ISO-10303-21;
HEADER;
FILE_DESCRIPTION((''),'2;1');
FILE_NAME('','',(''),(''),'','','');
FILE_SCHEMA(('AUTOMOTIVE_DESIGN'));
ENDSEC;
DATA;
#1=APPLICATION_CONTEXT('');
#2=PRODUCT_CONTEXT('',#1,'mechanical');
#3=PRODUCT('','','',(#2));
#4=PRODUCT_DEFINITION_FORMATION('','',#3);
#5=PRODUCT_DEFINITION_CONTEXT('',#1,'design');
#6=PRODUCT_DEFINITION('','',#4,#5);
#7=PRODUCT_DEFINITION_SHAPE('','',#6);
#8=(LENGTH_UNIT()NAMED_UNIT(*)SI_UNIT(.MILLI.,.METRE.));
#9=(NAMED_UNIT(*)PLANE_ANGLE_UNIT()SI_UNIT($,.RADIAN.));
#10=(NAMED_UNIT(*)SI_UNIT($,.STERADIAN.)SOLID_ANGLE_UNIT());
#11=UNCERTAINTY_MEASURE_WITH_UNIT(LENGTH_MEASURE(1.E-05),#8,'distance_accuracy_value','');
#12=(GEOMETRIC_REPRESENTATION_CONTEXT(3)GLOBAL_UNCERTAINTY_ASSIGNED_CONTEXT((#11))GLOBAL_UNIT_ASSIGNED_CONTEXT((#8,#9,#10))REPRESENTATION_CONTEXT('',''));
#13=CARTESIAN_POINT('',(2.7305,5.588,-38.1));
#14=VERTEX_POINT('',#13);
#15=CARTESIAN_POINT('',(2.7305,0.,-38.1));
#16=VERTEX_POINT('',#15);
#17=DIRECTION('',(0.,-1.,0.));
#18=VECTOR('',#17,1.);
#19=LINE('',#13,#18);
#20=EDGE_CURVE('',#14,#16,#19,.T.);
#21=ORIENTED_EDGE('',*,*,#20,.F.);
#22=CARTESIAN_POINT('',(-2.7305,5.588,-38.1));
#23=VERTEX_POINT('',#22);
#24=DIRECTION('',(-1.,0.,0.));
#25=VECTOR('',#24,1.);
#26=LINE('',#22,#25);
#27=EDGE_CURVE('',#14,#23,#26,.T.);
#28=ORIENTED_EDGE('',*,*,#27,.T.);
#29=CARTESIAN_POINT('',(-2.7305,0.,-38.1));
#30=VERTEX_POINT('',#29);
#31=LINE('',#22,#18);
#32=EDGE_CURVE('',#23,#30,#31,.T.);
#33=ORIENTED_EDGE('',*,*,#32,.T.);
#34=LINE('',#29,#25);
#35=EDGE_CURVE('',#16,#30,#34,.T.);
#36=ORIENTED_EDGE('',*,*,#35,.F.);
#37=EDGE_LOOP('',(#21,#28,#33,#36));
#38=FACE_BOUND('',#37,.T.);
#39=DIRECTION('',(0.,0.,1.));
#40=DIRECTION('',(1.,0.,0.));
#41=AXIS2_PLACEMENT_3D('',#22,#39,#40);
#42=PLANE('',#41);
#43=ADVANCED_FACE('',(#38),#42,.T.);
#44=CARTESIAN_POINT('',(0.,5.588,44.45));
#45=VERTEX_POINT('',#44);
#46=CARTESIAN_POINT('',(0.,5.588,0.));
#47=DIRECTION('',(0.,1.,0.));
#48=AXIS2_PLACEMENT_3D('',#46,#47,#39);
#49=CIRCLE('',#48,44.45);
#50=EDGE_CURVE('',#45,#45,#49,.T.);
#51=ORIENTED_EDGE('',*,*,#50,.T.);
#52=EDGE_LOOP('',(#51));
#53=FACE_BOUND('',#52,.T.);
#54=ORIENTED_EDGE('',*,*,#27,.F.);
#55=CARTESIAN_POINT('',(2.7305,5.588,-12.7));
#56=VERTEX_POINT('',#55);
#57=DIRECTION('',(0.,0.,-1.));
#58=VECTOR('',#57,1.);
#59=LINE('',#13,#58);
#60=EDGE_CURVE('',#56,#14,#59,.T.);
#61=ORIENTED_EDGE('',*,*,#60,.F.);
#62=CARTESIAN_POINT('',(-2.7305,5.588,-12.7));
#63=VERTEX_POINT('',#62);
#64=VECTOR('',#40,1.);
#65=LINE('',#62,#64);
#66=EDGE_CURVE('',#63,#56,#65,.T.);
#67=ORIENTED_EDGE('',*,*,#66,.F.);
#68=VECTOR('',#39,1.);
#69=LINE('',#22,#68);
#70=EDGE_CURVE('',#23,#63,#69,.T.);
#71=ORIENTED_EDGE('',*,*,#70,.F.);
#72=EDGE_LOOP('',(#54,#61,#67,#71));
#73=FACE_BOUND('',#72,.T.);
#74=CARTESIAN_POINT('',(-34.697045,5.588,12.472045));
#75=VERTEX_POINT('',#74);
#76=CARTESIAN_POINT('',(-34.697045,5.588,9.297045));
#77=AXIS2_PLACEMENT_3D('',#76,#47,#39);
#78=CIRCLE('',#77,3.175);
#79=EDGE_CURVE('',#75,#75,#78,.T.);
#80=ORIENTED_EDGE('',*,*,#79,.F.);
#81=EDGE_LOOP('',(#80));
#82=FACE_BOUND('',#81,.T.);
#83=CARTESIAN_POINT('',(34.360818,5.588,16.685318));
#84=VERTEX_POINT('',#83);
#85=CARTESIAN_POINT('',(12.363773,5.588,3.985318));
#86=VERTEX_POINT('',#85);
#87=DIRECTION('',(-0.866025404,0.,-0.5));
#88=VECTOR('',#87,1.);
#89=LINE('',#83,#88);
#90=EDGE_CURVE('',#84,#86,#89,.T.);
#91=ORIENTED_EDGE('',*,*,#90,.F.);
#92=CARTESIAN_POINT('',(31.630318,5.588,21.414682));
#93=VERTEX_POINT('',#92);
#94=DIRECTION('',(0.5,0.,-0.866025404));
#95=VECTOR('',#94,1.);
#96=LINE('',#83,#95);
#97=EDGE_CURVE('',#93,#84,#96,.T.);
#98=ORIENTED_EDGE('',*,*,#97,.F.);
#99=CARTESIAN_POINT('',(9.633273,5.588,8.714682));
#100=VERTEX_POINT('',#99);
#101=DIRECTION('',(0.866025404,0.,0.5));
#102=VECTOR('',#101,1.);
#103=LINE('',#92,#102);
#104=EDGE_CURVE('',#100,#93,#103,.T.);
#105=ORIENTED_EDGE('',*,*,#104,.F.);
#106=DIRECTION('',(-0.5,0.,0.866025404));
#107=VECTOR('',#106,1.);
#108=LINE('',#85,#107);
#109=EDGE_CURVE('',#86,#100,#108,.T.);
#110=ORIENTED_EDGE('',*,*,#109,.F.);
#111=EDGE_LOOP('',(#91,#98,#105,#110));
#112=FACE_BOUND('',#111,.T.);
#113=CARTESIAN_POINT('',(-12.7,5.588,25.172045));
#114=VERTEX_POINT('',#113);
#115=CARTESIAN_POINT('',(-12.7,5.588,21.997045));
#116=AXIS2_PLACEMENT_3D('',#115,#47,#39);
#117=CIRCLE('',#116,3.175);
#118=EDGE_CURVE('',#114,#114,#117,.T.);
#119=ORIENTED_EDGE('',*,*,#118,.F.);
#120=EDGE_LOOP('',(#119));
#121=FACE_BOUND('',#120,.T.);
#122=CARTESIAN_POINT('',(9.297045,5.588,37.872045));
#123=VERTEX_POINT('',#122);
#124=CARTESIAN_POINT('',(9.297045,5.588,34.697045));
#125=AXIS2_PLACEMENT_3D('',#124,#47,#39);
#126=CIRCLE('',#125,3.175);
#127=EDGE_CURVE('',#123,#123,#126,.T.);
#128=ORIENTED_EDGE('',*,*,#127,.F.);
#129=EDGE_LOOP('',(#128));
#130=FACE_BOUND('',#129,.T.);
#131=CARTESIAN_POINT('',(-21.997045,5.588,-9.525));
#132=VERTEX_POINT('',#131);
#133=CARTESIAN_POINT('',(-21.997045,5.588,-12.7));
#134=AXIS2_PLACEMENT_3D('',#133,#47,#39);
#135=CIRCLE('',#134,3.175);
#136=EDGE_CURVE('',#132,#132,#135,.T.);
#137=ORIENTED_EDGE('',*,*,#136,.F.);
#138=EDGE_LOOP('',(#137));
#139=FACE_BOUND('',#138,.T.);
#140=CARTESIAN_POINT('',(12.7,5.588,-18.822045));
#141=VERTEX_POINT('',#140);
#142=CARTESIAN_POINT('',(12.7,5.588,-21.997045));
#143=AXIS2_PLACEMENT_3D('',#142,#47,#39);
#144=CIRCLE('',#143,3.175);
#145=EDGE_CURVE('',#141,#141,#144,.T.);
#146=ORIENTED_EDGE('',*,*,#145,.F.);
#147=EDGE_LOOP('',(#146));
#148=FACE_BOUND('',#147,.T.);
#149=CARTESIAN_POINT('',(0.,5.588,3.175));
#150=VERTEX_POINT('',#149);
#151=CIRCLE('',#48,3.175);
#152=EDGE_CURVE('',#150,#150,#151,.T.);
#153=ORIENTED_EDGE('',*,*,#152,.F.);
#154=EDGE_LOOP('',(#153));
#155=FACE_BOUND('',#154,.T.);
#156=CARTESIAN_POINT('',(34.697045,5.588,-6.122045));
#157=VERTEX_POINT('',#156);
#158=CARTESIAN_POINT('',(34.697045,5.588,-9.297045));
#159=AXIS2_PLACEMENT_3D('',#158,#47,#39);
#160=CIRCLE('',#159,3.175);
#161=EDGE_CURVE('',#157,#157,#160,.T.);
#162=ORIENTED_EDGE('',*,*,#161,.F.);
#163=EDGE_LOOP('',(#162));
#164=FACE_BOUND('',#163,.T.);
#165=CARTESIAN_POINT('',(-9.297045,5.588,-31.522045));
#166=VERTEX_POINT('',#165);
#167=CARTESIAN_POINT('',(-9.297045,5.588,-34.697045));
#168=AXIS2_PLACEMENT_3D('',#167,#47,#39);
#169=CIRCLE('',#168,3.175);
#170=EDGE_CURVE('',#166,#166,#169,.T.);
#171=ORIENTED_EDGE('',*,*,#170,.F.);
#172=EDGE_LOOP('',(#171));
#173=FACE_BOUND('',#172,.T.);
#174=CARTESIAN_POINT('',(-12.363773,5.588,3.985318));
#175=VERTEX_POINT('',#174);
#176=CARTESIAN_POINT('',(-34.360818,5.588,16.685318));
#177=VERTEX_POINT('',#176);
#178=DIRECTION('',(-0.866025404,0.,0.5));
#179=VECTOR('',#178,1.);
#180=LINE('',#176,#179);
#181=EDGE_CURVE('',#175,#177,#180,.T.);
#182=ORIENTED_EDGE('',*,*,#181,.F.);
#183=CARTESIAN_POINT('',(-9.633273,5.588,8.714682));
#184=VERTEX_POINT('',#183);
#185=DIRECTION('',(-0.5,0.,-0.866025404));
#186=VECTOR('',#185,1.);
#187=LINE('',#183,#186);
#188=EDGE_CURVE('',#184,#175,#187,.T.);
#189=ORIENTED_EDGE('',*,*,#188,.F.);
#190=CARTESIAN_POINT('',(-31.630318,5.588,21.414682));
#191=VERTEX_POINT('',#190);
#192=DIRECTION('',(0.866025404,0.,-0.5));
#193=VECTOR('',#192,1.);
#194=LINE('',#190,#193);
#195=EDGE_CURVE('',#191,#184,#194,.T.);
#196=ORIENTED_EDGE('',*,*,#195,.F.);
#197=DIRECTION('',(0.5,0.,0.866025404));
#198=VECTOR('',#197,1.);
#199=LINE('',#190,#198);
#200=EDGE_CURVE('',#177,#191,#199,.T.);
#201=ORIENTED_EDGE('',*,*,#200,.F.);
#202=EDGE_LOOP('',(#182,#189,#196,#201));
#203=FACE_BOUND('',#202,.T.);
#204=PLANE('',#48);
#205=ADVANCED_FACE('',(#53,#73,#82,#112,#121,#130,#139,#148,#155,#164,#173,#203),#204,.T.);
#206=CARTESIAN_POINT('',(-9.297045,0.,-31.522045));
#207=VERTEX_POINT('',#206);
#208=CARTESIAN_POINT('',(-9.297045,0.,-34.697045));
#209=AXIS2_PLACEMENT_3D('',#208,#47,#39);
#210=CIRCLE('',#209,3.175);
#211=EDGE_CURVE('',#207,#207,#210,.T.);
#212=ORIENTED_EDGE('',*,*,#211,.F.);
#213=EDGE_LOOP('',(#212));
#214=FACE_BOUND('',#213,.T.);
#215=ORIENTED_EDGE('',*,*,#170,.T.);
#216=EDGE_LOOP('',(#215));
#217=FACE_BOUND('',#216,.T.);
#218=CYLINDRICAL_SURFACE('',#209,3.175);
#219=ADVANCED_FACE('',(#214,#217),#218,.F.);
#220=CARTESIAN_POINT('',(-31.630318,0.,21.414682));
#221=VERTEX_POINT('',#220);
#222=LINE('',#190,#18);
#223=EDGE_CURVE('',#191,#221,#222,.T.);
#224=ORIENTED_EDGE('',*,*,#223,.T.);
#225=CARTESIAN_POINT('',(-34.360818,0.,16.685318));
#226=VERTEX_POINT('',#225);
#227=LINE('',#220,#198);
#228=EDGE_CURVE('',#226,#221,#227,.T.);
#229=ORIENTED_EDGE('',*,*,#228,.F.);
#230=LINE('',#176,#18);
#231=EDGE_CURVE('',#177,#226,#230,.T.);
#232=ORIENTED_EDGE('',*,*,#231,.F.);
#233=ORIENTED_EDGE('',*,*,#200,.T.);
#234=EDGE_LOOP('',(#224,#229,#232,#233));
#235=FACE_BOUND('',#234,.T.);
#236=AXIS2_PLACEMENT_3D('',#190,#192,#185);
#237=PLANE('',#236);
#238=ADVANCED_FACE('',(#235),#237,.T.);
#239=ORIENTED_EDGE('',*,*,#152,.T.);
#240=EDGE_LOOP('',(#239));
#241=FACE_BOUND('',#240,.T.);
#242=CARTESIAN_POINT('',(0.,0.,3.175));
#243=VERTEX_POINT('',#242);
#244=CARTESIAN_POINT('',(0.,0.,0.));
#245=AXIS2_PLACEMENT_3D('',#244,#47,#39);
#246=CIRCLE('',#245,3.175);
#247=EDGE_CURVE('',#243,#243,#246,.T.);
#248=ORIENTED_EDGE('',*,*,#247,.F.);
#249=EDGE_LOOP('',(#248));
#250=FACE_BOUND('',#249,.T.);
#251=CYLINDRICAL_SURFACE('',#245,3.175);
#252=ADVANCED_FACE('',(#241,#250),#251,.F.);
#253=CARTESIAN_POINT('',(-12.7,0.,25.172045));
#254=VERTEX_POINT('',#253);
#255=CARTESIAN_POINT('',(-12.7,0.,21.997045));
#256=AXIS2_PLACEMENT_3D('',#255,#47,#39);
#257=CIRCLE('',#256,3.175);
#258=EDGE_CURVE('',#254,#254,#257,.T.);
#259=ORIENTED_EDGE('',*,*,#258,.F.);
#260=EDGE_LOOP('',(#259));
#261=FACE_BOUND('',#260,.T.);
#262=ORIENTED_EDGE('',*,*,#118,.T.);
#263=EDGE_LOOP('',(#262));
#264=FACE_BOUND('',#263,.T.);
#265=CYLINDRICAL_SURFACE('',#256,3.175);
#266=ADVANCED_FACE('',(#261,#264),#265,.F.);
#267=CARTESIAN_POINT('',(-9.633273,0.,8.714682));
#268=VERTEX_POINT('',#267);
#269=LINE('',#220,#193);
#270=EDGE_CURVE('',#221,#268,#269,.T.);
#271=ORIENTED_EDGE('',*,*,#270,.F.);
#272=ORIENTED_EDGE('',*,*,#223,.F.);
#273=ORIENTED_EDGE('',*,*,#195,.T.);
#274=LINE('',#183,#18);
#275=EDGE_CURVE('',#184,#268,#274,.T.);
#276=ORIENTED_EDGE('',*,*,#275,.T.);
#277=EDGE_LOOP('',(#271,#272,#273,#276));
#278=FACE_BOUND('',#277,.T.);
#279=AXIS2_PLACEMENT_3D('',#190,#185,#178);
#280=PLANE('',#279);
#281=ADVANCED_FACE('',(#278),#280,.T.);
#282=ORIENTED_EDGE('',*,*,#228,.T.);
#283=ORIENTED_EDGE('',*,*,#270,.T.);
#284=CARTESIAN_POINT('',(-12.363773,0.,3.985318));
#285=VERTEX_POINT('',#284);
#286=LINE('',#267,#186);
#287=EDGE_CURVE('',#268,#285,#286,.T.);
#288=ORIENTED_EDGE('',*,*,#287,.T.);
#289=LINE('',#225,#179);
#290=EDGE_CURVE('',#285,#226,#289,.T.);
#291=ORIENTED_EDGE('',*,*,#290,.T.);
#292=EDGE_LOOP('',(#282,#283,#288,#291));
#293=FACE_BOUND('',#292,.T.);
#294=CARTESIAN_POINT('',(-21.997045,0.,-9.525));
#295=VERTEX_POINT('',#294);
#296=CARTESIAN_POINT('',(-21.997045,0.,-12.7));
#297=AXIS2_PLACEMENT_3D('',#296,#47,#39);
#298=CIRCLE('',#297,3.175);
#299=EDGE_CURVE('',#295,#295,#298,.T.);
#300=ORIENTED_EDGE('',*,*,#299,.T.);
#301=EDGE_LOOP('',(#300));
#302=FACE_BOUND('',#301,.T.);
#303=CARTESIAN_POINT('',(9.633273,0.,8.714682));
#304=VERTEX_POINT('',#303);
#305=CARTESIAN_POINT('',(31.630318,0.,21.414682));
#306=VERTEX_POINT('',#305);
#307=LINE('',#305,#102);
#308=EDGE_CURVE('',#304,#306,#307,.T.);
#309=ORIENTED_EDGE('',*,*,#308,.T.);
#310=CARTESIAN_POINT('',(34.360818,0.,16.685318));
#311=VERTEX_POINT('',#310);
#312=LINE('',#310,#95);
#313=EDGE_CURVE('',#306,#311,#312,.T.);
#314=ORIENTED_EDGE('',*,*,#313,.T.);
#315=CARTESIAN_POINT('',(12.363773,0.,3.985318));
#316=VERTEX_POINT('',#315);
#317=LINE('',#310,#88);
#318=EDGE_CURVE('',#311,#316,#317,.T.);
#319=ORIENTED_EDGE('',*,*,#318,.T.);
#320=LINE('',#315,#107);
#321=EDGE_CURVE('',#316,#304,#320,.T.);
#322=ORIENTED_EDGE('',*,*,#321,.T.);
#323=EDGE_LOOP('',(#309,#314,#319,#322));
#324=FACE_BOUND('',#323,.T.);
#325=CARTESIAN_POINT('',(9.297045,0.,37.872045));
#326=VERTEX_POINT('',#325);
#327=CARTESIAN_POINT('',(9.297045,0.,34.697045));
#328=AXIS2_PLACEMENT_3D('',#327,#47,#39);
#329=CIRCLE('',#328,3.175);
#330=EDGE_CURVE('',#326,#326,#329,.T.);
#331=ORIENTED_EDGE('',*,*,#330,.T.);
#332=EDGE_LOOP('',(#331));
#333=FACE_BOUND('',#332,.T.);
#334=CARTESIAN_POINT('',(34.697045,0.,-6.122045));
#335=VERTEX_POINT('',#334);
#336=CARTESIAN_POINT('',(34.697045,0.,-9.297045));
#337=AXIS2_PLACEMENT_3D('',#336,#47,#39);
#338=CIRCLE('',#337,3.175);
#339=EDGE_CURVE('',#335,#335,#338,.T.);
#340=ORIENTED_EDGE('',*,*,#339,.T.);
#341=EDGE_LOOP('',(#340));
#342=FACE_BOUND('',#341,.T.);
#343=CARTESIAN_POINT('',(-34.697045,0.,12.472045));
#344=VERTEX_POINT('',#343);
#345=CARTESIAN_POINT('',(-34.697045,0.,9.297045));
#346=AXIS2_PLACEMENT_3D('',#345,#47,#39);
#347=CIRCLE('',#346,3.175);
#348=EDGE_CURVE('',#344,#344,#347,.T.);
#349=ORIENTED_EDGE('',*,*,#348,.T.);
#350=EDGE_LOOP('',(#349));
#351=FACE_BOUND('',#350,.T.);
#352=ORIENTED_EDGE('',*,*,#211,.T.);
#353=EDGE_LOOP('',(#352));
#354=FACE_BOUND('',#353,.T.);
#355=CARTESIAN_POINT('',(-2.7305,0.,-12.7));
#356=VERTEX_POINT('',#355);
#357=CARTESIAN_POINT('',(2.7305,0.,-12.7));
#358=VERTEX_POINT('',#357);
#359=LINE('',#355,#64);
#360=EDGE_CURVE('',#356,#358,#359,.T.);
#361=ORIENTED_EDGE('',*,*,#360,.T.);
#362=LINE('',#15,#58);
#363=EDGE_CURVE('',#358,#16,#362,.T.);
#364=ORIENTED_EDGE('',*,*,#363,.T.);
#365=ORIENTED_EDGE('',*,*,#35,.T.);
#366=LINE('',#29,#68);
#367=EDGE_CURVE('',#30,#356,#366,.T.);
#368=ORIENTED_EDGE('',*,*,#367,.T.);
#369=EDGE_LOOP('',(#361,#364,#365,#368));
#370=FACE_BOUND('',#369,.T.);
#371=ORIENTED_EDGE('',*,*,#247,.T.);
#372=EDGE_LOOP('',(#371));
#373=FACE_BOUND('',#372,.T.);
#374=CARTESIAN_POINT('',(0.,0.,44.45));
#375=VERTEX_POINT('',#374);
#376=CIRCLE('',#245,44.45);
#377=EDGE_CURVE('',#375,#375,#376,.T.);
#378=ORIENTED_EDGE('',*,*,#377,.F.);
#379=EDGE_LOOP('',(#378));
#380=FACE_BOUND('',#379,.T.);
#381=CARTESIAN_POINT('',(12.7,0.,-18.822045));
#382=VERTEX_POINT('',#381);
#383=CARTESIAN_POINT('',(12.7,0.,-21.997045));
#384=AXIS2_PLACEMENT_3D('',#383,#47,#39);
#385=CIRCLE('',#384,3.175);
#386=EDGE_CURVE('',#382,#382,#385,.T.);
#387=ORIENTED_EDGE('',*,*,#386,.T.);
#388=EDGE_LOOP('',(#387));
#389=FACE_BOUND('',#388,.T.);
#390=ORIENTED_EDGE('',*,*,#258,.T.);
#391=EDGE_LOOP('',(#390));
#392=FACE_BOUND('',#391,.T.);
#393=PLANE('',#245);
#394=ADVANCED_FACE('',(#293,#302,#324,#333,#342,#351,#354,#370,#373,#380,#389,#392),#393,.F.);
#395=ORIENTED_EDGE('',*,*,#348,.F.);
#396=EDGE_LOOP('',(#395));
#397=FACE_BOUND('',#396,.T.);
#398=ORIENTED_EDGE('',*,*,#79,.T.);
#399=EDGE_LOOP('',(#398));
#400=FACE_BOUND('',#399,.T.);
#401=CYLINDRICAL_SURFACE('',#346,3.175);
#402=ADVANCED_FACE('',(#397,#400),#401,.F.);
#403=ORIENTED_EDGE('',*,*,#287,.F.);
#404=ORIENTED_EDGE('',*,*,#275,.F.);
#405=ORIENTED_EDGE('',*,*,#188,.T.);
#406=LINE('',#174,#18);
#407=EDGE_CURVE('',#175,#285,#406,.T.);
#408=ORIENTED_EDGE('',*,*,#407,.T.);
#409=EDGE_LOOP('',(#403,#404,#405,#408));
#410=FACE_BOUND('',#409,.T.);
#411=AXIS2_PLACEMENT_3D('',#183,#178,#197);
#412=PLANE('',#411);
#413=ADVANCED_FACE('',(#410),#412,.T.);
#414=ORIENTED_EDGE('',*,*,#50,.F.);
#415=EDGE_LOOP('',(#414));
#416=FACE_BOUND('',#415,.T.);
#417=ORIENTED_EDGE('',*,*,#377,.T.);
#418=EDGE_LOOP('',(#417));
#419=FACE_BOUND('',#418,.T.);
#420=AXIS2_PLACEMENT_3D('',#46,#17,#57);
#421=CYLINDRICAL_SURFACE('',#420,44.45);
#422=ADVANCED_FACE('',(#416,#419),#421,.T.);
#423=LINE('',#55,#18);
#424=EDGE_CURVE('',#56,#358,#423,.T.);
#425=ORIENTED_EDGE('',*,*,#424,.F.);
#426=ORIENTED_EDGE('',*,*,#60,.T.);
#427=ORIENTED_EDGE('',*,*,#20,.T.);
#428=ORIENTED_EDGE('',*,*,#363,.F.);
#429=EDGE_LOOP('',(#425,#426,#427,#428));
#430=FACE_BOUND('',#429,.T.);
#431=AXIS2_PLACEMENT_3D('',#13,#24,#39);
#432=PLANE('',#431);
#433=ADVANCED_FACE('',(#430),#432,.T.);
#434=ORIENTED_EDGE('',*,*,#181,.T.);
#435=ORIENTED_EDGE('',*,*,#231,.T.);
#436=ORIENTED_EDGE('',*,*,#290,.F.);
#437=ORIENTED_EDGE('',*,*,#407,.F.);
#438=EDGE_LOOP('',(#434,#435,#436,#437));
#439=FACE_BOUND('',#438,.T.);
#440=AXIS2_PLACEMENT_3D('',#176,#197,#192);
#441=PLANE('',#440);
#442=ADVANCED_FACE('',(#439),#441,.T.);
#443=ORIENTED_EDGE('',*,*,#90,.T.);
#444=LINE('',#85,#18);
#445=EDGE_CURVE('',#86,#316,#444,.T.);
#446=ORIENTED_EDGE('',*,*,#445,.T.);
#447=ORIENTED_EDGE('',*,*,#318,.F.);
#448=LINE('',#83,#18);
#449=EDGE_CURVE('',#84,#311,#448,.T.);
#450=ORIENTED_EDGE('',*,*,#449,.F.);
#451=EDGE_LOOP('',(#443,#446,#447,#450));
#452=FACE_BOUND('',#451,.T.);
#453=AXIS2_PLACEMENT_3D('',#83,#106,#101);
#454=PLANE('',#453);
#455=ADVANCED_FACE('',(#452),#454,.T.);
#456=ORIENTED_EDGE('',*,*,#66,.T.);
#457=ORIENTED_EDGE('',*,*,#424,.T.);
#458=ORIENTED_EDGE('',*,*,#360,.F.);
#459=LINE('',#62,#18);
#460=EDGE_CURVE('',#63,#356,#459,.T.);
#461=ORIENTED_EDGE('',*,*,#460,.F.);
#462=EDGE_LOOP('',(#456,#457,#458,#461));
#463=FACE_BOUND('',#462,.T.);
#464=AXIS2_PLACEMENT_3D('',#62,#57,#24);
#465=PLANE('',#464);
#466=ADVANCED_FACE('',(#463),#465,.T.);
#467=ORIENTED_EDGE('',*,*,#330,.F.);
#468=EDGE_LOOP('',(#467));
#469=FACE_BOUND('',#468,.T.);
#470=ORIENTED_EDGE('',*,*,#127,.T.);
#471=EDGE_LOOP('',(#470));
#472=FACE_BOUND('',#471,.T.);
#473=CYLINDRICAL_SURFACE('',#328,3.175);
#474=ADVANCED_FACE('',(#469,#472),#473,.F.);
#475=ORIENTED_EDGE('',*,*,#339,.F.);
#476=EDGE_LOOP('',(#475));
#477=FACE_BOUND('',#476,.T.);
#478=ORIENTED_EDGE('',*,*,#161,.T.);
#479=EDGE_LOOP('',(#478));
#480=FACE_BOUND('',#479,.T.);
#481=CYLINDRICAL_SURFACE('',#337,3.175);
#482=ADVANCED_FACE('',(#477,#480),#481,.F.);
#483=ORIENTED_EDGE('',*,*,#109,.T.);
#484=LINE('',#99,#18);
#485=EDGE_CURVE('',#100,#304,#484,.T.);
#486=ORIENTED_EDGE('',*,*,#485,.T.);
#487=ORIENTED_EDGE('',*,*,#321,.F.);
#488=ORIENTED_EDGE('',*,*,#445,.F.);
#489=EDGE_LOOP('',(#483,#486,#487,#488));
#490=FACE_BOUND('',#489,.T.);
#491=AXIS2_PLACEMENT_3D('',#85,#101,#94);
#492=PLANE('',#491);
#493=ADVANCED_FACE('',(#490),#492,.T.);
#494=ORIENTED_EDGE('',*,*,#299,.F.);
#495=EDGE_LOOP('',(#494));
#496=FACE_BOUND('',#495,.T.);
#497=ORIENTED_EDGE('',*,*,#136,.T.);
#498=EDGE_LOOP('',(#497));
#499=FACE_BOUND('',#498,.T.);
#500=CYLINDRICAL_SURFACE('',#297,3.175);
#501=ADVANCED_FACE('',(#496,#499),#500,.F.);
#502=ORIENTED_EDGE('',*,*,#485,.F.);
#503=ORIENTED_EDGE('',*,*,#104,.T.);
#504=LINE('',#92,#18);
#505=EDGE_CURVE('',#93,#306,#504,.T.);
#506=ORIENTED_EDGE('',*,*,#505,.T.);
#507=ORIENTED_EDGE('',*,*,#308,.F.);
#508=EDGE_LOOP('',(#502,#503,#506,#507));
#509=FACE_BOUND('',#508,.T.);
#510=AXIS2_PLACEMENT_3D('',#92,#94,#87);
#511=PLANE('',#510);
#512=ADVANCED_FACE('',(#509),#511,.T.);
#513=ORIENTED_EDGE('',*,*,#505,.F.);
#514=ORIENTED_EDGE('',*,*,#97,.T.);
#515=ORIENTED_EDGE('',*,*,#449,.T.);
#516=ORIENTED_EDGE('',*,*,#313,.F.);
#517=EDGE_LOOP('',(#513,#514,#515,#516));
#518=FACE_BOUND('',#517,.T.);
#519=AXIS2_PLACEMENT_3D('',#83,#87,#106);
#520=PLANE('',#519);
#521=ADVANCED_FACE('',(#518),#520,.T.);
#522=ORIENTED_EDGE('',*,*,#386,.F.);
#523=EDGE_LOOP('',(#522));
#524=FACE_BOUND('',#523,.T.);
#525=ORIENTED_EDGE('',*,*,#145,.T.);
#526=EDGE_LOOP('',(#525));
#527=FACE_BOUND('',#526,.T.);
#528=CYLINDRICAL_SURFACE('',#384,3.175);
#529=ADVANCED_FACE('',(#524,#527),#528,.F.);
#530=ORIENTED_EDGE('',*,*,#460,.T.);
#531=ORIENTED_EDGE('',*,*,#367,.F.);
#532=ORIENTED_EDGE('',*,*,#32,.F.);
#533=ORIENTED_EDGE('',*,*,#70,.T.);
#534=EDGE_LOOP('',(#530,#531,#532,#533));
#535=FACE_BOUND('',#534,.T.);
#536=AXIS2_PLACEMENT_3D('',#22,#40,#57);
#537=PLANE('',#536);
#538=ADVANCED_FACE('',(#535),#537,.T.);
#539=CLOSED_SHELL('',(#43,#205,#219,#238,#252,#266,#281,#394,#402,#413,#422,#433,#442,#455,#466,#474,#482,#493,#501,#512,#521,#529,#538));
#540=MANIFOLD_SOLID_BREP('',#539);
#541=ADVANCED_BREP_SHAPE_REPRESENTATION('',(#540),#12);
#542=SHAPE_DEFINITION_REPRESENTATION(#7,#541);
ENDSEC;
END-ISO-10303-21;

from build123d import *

# Parameters (mm, degrees)
SKETCH2_R               = 44.45
SKETCH2_W               = 5.461
SKETCH2_H               = 25.4
BOSS_EXTRUDE1_DEPTH     = 5.588
SKETCH3_R               = 3.175
CUT_EXTRUDE1_DEPTH      = 64.109672349
FILL_PATTERN1_OUTLINE_R = 3.175
FILL_PATTERN1_DEPTH     = 5.588


# Read off the part's stored shape, not the designer's step: Fill Pattern1
with BuildPart() as part:
    # Sketch2 → Boss-Extrude1 (new body)
    with BuildSketch(Plane(origin=(0, 0, 0), x_dir=(1, 0, 0), z_dir=(0, 1, 0))):
        with Locations(Location((0, 0, 0), (0, 0, 270))):
            Circle(SKETCH2_R)
        with Locations((0, 25.4)):
            Rectangle(SKETCH2_W, SKETCH2_H, mode=Mode.SUBTRACT)
        Polygon((34.360817884, -16.685317635), (31.630317884, -21.414682365), (9.633272628, -8.714682365), (12.363772628, -3.985317635), align=None, mode=Mode.SUBTRACT)
        Polygon((-31.630317884, -21.414682365), (-34.360817884, -16.685317635), (-12.363772628, -3.985317635), (-9.633272628, -8.714682365), align=None, mode=Mode.SUBTRACT)
    extrude(amount=BOSS_EXTRUDE1_DEPTH)

    # Sketch3 → Cut-Extrude1 (cut, through all)
    with BuildSketch(Plane(origin=(0, 5.588, 0), x_dir=(1, 0, 0), z_dir=(0, 1, 0))):
        with Locations(Location((0, 0, 0), (0, 0, 270))):
            Circle(SKETCH3_R)
    extrude(amount=-CUT_EXTRUDE1_DEPTH, mode=Mode.SUBTRACT)

    # Fill Pattern1 outline → Fill Pattern1 (cut)
    with BuildSketch(Plane(origin=(0, 0, 0), x_dir=(1, 0, 0), z_dir=(0, 1, 0))):
        with Locations((34.697045256, 9.297045256)):
            Circle(FILL_PATTERN1_OUTLINE_R)
        with Locations((9.297045256, -34.697045256)):
            Circle(FILL_PATTERN1_OUTLINE_R)
        with Locations((-12.7, -21.997045256)):
            Circle(FILL_PATTERN1_OUTLINE_R)
        with Locations((-34.697045256, -9.297045256)):
            Circle(FILL_PATTERN1_OUTLINE_R)
        with Locations((-21.997045256, 12.7)):
            Circle(FILL_PATTERN1_OUTLINE_R)
        with Locations((-9.297045256, 34.697045256)):
            Circle(FILL_PATTERN1_OUTLINE_R)
        with Locations((12.7, 21.997045256)):
            Circle(FILL_PATTERN1_OUTLINE_R)
    extrude(amount=FILL_PATTERN1_DEPTH, mode=Mode.SUBTRACT)


solid = part.part
